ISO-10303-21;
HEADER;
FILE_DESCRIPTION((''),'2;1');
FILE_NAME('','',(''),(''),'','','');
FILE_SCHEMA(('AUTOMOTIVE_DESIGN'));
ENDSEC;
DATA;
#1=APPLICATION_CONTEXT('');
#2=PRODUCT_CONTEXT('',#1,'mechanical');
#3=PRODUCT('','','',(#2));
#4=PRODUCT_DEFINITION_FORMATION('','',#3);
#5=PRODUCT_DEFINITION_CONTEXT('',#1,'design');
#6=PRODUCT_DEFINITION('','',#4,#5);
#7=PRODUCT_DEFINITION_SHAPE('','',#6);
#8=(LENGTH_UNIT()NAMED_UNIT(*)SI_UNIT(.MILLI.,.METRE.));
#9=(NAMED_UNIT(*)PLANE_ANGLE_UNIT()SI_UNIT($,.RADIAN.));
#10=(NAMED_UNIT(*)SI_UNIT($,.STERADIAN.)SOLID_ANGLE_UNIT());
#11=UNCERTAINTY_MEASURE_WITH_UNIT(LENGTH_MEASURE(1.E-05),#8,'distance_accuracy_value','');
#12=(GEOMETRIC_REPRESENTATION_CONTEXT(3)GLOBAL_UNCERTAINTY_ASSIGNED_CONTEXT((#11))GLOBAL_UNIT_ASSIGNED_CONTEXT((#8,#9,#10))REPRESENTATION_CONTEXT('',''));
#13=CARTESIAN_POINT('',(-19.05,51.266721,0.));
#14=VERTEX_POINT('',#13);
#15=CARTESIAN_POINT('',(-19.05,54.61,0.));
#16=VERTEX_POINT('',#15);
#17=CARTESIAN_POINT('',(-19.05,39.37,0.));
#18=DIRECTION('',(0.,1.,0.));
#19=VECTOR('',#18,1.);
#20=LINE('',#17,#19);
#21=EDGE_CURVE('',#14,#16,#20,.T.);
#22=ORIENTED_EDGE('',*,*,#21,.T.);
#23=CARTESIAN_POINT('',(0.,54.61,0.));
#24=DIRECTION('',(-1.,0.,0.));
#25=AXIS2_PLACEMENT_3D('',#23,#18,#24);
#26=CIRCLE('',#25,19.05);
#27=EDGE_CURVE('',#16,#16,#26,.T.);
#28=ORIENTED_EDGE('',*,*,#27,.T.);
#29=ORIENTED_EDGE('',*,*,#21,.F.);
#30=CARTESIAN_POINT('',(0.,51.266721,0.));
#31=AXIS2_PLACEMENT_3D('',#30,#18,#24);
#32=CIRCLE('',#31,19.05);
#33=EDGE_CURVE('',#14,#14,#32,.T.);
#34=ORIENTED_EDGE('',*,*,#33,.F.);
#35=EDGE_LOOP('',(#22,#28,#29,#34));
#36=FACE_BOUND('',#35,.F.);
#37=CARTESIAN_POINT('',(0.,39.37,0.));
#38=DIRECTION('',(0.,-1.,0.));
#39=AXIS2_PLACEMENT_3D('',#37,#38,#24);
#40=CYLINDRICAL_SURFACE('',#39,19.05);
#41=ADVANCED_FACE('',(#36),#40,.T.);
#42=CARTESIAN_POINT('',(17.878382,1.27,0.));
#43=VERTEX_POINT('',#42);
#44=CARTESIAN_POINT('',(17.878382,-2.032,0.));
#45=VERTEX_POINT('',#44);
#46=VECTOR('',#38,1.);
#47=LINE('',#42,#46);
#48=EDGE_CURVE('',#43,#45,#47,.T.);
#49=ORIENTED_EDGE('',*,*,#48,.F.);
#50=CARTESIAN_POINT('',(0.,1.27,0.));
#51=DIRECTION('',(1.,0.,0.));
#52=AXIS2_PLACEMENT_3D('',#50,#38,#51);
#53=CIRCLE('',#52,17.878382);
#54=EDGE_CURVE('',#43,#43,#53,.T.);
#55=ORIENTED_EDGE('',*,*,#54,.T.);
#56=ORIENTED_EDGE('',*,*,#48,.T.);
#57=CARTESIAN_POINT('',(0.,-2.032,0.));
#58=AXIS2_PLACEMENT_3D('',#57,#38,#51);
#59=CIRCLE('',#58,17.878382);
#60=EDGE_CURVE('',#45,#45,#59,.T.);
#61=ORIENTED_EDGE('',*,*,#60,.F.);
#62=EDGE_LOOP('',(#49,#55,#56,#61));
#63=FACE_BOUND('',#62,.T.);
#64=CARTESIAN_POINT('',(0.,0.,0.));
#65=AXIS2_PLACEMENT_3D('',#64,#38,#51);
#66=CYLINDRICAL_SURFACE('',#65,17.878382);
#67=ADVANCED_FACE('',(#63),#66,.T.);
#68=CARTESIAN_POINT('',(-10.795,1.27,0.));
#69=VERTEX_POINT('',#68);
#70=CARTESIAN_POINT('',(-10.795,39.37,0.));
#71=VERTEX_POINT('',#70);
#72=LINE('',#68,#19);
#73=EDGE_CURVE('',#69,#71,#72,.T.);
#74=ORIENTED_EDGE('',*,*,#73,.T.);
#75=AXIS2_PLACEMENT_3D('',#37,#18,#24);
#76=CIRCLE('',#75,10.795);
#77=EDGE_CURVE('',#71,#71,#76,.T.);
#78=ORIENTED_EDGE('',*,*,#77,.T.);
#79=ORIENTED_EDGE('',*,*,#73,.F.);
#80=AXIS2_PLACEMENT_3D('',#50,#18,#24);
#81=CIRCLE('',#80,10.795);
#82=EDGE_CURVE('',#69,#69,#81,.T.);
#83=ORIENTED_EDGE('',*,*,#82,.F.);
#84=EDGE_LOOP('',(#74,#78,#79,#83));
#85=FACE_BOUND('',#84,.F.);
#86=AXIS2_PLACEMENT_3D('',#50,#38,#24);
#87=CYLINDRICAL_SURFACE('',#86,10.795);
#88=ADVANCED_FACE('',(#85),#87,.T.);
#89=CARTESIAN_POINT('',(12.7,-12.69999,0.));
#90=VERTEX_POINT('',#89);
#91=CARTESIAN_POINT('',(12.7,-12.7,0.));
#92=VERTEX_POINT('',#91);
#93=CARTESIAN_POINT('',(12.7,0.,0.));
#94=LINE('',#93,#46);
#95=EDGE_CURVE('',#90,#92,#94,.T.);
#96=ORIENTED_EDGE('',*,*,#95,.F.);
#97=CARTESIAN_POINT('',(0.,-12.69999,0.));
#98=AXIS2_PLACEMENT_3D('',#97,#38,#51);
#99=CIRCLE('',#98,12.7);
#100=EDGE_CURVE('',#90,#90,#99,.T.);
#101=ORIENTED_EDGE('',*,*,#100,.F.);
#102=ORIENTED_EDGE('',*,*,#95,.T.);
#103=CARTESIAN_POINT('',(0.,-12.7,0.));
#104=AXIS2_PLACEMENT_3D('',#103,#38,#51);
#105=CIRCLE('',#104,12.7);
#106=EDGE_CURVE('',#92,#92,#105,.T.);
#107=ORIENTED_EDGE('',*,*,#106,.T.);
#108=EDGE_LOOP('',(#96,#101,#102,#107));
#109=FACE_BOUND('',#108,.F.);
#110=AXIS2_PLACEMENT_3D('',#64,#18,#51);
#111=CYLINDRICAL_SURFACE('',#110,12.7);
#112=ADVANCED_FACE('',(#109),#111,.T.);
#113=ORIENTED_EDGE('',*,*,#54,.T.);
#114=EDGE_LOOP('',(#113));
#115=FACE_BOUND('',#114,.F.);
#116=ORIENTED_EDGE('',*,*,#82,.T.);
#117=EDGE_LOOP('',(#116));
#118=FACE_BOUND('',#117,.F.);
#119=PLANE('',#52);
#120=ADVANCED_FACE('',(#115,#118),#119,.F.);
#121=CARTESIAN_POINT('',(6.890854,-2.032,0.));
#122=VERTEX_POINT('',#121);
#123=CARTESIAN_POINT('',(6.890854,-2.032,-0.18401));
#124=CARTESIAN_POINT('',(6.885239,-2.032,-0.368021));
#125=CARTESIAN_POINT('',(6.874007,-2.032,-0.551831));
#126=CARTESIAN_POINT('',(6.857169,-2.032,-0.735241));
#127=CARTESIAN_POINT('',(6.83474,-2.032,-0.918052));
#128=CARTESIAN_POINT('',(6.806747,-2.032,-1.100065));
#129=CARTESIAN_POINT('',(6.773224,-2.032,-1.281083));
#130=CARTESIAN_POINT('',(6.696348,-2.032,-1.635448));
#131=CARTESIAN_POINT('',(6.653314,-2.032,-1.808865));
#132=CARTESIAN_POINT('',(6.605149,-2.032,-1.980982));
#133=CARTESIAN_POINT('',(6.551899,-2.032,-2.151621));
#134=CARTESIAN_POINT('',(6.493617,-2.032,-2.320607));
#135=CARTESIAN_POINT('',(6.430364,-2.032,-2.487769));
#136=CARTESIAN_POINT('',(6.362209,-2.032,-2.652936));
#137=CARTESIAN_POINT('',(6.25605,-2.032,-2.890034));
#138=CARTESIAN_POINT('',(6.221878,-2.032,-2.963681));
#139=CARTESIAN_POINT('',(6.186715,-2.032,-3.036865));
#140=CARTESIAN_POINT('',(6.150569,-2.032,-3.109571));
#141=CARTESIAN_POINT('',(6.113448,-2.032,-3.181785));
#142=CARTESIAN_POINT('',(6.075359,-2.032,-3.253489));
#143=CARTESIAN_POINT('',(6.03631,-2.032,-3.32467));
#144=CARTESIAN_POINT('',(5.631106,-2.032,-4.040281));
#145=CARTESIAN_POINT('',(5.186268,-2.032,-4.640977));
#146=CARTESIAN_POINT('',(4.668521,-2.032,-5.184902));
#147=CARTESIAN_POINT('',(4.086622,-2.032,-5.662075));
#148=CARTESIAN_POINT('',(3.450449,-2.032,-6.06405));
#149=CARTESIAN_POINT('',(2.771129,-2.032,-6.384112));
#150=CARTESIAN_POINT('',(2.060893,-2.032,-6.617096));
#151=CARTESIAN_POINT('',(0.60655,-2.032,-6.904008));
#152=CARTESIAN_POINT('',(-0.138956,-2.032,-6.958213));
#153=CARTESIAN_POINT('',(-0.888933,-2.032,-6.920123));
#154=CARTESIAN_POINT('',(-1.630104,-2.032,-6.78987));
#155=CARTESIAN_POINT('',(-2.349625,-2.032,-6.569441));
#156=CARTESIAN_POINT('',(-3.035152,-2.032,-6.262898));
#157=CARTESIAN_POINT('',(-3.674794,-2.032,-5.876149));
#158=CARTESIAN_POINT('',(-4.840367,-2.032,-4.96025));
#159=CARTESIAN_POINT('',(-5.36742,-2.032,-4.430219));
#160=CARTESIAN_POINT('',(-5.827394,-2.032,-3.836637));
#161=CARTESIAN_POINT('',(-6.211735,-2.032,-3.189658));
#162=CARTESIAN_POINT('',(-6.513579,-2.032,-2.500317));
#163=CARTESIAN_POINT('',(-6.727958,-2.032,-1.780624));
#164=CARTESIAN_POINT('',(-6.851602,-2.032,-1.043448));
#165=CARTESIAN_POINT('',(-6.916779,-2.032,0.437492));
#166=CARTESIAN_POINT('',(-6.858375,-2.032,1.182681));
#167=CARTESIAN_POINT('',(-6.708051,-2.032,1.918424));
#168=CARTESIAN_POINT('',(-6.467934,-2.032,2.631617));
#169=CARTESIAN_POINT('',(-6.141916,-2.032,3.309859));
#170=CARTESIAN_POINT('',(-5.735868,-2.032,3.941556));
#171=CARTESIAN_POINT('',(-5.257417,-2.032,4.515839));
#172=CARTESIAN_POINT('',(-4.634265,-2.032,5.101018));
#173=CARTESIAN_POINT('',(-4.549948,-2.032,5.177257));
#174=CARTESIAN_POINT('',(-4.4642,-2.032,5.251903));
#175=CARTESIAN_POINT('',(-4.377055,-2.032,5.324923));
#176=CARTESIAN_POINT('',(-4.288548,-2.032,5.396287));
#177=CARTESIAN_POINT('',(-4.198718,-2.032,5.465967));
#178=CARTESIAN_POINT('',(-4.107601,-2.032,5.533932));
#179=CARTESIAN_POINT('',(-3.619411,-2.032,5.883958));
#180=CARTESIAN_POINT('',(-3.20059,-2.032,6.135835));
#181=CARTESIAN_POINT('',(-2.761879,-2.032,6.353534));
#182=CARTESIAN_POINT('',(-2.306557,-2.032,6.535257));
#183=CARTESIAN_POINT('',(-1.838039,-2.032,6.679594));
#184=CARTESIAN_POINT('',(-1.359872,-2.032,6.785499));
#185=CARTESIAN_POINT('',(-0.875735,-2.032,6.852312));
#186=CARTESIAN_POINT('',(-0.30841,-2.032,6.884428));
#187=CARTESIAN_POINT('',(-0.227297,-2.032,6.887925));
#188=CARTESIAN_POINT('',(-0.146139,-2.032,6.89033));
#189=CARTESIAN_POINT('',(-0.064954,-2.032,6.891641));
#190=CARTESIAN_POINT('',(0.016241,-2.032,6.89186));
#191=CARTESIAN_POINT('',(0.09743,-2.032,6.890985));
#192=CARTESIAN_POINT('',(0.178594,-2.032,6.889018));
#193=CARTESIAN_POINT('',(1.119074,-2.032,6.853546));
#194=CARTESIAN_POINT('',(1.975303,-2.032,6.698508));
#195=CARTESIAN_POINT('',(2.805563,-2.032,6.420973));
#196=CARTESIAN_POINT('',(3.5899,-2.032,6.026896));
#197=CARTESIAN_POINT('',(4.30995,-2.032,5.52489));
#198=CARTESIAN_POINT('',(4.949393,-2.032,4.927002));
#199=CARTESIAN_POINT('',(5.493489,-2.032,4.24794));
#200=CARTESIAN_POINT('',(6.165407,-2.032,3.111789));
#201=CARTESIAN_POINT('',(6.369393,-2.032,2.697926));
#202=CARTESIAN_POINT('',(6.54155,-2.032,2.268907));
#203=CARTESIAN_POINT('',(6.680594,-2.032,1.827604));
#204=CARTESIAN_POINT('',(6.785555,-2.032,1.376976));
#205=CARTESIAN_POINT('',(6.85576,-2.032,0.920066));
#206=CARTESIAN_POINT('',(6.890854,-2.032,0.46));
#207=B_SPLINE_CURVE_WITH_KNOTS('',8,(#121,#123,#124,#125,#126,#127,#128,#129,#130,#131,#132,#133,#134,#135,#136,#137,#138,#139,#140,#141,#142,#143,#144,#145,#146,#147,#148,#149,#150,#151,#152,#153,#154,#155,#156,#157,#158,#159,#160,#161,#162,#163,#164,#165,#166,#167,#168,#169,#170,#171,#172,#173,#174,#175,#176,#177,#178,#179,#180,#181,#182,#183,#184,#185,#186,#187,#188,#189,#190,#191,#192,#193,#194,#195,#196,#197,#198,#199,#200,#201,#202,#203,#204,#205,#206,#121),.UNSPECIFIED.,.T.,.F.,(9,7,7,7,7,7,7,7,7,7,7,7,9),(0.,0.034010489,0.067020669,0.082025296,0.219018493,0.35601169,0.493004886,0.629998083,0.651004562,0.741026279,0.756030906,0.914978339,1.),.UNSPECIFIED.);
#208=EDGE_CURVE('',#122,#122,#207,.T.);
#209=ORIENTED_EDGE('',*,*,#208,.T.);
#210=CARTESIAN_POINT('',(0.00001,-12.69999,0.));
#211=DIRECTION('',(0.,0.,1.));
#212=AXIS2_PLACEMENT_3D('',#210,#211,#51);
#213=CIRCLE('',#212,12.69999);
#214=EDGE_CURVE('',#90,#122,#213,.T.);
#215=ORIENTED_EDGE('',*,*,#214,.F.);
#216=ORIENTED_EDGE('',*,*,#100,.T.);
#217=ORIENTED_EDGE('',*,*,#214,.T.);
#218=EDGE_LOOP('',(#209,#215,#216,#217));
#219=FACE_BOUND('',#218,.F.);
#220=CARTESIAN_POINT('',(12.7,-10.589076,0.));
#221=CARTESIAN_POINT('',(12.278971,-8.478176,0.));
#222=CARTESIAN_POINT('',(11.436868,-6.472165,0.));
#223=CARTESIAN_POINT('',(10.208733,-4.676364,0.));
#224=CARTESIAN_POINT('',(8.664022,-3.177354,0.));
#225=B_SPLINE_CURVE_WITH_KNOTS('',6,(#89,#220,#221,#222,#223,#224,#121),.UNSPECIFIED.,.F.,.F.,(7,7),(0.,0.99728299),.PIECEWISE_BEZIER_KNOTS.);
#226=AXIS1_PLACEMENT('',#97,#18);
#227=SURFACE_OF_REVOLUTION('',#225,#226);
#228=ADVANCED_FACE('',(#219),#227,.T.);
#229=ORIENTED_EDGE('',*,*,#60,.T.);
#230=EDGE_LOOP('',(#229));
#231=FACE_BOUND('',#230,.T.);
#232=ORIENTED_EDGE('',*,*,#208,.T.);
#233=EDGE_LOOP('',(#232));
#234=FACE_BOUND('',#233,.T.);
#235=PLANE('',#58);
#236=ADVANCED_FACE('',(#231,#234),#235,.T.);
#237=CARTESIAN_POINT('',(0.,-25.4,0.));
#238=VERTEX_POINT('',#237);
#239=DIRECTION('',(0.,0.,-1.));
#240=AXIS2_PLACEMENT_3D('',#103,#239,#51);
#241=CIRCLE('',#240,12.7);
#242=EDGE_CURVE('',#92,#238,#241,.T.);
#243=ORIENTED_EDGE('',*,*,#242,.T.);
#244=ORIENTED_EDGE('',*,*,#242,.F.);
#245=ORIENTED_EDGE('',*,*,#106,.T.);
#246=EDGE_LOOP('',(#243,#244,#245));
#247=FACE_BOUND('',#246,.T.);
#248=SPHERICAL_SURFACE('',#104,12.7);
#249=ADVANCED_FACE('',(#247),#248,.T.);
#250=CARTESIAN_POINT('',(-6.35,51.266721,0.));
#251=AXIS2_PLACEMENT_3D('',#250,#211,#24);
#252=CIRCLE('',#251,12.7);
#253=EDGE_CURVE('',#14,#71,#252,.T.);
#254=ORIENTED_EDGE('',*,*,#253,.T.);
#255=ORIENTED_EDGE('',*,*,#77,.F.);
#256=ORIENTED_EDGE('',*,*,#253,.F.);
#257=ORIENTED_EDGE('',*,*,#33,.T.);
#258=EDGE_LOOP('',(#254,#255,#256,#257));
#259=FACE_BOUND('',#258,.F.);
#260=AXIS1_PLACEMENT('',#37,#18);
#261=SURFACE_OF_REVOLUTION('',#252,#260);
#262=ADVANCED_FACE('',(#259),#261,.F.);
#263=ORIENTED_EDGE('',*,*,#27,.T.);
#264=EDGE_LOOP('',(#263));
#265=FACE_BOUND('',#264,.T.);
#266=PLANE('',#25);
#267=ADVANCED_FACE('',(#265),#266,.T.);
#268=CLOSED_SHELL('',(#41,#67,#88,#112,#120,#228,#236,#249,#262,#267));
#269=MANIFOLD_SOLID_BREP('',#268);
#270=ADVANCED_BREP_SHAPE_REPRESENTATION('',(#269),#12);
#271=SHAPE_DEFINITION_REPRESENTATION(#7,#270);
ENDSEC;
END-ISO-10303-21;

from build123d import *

# Parameters (mm, degrees)
F0_R          = 12.7
F1_DEPTH      = 25.4
F2_R          = 12.7
F3_R          = 12.69999
F4_R          = 17.8783824342
F5_DEPTH      = 1.27
F5_DEPTH_BACK = 2.032
F6_R          = 10.795
F7_DEPTH      = 38.1
F8_R          = 19.05
F9_DEPTH      = 15.24


# Not quite as in the source:
# - a fillet or chamfer that OpenCascade refuses, or shapes differently, is made with other operations: its cross-section is extruded or revolved along the edge and cut away or added
# - a fillet or chamfer is up to 0.001 mm smaller than in the source, because OpenCascade refuses the exact size


with BuildPart() as f1:
    # F0 (on Front) → F1 (new body)
    with BuildSketch(Plane.XZ):
        Circle(F0_R)
    extrude(amount=F1_DEPTH)

    # F2
    f2_edges = [f1.edges().sort_by_distance(p)[0] for p in [
        (-12.7, -25.4, 0),
    ]]
    fillet(f2_edges, radius=F2_R)

    # F3 (radius 12.7 in the source; OpenCascade refuses exactly that, so slightly less here)
    f3_edges = [f1.edges().sort_by_distance(p)[0] for p in [
        (-12.7, 0, 0),
    ]]
    fillet(f3_edges, radius=F3_R)

    # F4 (on Front) → F5 (join, two sides)
    with BuildSketch(Plane.XZ) as f5_sk:
        Circle(F4_R)
    extrude(amount=-F5_DEPTH)
    extrude(f5_sk.sketch, amount=F5_DEPTH_BACK)

    # F6 (on face) → F7 (join)
    with BuildSketch(Plane(origin=(0, 1.27, 0), x_dir=(-1, 0, 0), z_dir=(0, 1, 0))):
        Circle(F6_R)
    extrude(amount=F7_DEPTH)

    # F8 (on face) → F9 (join)
    with BuildSketch(Plane(origin=(0, 39.37, 0), x_dir=(-1, 0, 0), z_dir=(0, 1, 0))):
        Circle(F8_R)
    extrude(amount=F9_DEPTH)

    # F10: fillet of radius 12.7 on 1 edges, made by hand

    # F10_s1 → F10_t2 (revolve, cut)
    with BuildSketch(Plane.XY):
        with BuildLine():
            ThreePointArc((-19.05, 51.2667211869), (-16.7841147205, 44.0266072376), (-10.795, 39.37))
            Line((-10.795, 39.37), (-19.05, 39.37))
            Line((-19.05, 39.37), (-19.05, 51.2667211869))
        make_face()
    revolve(axis=Axis((0, 39.37, 0), (0, 1, 0)), mode=Mode.SUBTRACT)


solid = f1.part
